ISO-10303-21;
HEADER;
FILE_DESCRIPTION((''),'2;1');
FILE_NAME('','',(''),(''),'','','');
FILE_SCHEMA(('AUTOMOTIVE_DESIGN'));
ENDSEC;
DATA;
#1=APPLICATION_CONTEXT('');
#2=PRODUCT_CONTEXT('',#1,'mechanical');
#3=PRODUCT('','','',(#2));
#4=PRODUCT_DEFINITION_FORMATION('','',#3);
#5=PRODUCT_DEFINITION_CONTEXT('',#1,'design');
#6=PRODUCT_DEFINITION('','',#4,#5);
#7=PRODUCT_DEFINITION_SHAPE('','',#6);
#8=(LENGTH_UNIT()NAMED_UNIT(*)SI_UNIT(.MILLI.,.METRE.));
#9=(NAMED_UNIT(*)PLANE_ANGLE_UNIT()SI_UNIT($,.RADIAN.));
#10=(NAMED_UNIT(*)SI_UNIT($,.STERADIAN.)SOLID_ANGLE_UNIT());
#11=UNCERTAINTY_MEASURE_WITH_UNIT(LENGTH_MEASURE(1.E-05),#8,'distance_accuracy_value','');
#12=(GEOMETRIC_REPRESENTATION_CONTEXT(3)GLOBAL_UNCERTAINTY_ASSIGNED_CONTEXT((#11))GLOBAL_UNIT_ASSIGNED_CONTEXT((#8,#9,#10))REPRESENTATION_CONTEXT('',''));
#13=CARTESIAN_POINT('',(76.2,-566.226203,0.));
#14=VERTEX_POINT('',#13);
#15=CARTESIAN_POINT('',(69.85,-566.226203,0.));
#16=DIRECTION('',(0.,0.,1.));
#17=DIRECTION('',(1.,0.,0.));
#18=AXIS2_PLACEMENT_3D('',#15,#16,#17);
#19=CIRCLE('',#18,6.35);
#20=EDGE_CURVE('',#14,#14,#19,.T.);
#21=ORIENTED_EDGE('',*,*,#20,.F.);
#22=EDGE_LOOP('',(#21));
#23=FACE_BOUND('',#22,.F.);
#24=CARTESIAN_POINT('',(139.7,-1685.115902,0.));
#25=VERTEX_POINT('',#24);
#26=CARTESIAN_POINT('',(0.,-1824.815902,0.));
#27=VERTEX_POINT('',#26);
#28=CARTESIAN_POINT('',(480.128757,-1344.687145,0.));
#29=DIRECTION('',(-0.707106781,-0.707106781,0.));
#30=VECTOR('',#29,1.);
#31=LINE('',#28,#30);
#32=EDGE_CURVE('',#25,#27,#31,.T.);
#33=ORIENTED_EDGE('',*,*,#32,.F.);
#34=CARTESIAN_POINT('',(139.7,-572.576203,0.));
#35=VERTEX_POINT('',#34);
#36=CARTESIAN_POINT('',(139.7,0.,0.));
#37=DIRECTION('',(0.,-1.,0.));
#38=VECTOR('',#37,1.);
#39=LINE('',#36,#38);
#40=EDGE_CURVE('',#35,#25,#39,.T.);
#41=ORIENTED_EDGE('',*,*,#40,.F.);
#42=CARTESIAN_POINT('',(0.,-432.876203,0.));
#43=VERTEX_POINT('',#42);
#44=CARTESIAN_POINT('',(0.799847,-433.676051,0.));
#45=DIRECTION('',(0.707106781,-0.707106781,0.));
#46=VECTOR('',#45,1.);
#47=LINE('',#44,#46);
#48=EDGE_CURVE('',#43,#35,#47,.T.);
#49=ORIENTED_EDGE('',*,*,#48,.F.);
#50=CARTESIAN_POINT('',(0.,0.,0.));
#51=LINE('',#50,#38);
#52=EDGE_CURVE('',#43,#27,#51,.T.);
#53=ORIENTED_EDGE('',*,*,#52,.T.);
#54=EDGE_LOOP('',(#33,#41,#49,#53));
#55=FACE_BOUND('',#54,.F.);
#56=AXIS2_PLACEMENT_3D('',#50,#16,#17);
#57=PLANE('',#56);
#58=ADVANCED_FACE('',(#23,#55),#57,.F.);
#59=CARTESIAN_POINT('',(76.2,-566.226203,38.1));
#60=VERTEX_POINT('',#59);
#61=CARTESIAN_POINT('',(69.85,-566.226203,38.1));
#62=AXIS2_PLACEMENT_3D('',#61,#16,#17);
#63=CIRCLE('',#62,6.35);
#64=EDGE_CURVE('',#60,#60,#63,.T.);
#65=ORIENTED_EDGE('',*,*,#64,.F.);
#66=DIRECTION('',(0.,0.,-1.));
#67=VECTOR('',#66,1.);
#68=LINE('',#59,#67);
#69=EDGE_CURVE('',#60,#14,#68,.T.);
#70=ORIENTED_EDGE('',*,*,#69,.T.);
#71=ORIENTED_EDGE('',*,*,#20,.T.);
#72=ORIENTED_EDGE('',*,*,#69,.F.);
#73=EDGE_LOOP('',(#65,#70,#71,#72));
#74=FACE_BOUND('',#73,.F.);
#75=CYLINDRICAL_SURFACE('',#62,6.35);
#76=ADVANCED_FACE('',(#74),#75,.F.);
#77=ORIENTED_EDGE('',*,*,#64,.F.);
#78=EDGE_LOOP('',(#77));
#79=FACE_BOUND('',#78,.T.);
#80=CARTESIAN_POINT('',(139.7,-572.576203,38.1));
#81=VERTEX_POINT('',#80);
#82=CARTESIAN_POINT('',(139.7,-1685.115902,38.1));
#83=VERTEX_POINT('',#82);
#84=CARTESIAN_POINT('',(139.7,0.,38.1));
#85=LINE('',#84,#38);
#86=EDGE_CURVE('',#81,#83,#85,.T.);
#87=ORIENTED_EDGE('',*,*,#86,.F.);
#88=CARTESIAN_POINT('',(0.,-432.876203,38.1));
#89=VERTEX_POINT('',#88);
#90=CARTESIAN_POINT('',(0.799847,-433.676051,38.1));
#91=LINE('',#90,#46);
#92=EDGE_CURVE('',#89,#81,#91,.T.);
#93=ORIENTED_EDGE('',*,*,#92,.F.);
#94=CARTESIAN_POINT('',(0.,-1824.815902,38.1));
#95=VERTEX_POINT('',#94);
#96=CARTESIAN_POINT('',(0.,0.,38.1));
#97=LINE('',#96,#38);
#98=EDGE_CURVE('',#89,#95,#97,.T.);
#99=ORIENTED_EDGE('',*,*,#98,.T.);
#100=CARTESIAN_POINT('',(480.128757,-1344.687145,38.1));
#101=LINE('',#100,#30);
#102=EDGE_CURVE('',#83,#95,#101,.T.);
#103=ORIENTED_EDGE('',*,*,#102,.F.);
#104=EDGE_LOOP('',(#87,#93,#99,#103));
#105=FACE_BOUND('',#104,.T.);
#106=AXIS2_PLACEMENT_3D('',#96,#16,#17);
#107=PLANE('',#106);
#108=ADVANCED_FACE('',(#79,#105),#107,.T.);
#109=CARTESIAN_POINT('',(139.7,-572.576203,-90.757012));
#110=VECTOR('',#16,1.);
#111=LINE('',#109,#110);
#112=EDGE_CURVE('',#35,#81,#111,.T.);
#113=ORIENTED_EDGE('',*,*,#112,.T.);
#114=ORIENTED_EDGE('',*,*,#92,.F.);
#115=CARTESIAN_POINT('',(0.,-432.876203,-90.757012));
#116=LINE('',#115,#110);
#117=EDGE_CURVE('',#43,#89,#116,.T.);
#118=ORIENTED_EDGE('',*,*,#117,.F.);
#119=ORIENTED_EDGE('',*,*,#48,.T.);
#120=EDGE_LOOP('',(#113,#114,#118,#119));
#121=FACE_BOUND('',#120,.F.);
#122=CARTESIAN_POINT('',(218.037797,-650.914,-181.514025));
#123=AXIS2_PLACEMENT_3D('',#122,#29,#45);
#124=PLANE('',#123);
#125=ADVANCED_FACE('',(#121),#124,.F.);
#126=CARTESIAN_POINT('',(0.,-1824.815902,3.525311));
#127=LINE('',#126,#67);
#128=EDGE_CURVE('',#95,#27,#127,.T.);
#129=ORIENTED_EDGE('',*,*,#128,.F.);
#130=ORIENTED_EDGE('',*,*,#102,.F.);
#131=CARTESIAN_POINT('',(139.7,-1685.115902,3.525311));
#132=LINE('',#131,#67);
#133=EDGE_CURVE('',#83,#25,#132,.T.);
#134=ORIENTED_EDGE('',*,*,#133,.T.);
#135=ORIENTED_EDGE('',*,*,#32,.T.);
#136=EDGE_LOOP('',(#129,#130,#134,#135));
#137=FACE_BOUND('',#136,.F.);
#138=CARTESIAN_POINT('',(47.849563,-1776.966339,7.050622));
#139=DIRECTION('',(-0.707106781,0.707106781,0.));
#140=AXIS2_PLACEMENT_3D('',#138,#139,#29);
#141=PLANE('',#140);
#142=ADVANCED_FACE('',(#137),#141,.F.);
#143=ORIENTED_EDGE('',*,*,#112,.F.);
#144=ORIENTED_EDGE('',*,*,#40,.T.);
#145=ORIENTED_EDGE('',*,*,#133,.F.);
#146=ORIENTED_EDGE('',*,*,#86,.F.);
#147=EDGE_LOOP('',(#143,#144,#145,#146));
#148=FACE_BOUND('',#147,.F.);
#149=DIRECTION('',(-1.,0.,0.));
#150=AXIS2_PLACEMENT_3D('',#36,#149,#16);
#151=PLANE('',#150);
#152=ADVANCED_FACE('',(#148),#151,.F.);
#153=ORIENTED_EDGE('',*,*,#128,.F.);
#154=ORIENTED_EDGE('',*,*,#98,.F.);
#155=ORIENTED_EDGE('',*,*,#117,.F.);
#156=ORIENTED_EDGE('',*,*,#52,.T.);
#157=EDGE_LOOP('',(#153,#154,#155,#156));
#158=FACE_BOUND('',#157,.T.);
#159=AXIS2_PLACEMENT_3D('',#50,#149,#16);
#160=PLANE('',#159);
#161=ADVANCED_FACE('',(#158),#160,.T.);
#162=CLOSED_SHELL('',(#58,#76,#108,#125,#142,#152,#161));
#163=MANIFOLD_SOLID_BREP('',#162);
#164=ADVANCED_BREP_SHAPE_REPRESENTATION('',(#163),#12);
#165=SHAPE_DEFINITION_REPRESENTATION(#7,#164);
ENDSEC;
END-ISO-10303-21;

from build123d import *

# Parameters (mm, degrees)
F0_W      = 139.7
F0_H      = 38.1
F1_DEPTH  = 1828.8
F3_W      = 331.3202857971
F3_H      = 260.5838701129
F4_DEPTH  = 101.6
F7_W      = 1553.4552037716
F7_H      = 1155.3529500961
F8_DEPTH  = 762
F9_R      = 6.35
F10_DEPTH = 38.101


with BuildPart() as f1:
    # F0 (on Front) → F1 (new body)
    with BuildSketch(Plane.XZ):
        with Locations((69.85, 19.05)):
            Rectangle(F0_W, F0_H)
    extrude(amount=F1_DEPTH)

    # F3 (on face) → F4 (cut)
    with BuildSketch(Plane(origin=(984.25, -984.25, 0), x_dir=(-0.7071067812, -0.7071067812, 0), z_dir=(-0.7071067812, 0.7071067812, 0))):
        with Locations((1222.6701974869, 7.0506222546)):
            Rectangle(F3_W, F3_H)
    extrude(amount=F4_DEPTH, mode=Mode.SUBTRACT)

    # F7 (on face) → F8 (cut)
    with BuildSketch(Plane(origin=(-216.4381016486, -216.4381016486, 0), x_dir=(0.7071067812, -0.7071067812, 0), z_dir=(-0.7071067812, -0.7071067812, 0))):
        with Locations((614.4417077303, -181.5140247345)):
            Rectangle(F7_W, F7_H)
    extrude(amount=-F8_DEPTH, mode=Mode.SUBTRACT)

    # F9 (on face) → F10 (cut, through all)
    with BuildSketch(Plane.XY.offset(38.1)):
        with Locations((69.85, -566.2262032972)):
            Circle(F9_R)
    extrude(amount=-F10_DEPTH, mode=Mode.SUBTRACT)


solid = f1.part
